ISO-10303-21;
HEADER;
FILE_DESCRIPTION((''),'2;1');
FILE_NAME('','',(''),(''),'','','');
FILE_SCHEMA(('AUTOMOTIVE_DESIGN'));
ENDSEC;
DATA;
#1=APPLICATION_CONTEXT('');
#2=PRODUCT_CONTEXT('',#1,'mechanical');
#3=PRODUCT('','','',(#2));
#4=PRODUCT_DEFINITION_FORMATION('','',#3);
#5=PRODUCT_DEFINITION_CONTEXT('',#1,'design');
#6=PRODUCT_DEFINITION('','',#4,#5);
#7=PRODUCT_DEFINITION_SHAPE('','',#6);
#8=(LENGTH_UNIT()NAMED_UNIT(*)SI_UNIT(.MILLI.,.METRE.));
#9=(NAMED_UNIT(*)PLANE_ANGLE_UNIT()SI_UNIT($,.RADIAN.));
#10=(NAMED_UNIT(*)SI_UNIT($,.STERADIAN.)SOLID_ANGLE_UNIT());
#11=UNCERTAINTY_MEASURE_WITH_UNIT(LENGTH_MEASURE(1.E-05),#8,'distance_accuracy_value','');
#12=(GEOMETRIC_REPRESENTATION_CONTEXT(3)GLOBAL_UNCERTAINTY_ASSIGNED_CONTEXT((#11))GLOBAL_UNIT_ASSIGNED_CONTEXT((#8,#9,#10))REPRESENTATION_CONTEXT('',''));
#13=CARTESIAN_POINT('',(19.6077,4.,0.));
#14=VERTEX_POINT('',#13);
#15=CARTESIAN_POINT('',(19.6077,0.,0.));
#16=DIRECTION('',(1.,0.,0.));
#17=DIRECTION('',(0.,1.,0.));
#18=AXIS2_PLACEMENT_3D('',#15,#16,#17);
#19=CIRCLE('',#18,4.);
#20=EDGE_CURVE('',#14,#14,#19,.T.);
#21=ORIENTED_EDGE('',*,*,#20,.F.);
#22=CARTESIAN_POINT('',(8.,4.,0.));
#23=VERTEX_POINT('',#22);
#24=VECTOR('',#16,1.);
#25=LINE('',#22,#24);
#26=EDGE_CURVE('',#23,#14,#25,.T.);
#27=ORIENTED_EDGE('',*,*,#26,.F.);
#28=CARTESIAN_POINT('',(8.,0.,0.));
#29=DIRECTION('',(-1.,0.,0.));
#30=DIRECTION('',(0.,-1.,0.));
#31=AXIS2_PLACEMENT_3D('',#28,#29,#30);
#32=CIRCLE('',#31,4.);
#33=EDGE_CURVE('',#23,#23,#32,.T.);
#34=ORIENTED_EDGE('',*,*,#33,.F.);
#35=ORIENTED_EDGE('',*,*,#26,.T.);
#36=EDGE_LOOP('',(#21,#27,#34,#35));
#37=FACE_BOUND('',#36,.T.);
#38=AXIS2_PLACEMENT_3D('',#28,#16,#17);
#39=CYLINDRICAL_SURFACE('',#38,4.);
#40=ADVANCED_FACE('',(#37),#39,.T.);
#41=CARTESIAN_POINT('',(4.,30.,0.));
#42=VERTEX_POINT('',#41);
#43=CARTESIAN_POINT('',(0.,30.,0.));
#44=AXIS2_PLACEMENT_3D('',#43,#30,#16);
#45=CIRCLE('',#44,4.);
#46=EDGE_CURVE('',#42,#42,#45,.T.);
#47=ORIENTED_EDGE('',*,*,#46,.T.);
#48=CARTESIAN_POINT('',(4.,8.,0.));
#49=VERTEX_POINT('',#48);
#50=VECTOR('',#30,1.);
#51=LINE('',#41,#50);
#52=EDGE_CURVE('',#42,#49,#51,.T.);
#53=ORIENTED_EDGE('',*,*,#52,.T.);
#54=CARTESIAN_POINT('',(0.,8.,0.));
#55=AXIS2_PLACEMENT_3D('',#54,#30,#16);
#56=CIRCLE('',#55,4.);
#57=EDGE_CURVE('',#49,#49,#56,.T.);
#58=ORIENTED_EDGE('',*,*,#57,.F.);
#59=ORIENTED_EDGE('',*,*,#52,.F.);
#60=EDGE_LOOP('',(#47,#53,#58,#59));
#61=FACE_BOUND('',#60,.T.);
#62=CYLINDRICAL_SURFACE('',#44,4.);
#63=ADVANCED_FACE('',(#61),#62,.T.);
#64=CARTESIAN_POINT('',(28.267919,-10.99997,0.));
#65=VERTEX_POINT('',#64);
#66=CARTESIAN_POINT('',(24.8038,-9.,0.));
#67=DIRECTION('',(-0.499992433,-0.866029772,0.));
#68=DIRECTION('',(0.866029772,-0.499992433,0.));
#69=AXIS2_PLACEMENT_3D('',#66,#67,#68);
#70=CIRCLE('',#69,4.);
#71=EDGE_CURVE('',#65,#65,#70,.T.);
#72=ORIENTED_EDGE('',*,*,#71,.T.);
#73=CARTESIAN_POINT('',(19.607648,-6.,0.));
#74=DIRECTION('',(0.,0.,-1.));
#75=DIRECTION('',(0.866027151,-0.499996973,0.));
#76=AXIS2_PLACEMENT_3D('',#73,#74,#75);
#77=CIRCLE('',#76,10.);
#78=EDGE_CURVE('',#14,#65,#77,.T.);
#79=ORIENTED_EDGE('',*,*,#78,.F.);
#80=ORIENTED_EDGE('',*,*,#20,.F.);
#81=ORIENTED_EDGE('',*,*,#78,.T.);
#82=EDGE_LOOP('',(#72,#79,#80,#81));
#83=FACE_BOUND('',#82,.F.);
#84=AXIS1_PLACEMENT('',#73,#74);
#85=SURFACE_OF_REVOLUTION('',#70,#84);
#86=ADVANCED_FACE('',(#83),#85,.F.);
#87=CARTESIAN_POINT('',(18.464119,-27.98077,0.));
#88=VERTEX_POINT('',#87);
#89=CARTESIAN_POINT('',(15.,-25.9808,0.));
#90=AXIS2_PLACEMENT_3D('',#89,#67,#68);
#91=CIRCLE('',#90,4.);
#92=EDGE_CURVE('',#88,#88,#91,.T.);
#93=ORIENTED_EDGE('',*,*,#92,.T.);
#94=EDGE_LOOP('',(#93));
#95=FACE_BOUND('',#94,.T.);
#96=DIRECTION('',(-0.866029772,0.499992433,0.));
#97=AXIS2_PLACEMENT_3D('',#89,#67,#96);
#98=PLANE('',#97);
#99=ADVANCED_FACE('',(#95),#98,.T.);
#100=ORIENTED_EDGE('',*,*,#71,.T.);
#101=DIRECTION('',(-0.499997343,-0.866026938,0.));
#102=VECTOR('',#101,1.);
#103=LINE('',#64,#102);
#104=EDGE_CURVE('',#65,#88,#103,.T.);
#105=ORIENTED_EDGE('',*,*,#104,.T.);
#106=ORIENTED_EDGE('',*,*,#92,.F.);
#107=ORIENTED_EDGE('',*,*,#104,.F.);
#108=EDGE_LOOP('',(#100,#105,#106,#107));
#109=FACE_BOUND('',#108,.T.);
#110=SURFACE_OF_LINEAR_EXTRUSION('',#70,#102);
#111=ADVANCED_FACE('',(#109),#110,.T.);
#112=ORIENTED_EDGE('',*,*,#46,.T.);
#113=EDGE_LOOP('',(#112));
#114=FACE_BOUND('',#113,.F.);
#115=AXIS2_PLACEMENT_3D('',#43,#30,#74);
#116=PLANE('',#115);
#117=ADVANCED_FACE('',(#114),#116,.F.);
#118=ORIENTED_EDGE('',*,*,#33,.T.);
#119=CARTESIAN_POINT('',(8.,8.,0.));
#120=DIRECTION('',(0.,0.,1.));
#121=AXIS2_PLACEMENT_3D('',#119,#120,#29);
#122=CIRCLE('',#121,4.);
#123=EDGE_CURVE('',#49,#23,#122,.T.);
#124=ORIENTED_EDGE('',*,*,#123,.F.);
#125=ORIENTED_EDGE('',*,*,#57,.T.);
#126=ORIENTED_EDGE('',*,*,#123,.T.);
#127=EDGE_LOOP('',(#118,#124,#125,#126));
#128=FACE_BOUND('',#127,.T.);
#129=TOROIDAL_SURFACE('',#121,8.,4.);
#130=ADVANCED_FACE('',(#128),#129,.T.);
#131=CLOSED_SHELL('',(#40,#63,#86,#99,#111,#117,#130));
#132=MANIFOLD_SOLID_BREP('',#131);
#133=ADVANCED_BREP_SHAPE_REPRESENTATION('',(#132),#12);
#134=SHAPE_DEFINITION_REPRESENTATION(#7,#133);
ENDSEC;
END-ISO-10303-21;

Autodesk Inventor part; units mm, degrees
ref_plane "YZ Plane" through (0, 0, 0) normal (1, 0, 0) x (0, 1, 0)
ref_plane "XZ Plane" through (0, 0, 0) normal (0, 1, 0) x (-1, 0, 0)
sketch "草圖1" plane through (0, 0, 0) normal (0, 0, 1) x (1, 0, 0)
  line L0 (0, 30) -> (0, 8)
  line L1 (8, 0) -> (19.6077, 0)
  line L2 (24.8038, -9) -> (15, -25.9808)
  arc A0 (0, 8) -> (8, 0) centre (8, 8) ccw
  arc A1 (24.8038, -9) -> (19.6077, 0) centre (19.6077, -6) ccw
  point P0 (0, 0)
  point P1 (30, 0)
  dimension "d0" = 60
  dimension "d1" = 30
  dimension "d2" = 30
  dimension "d3" = 15
  dimension "d4" = 8
  dimension "d5" = 6
ref_plane "工作平面1" through (0, 30, 0) normal (0, -1, 0) x (1, 0, 0)
sketch "草圖2" plane through (0, 30, 0) normal (0, -1, 0) x (1, 0, 0)
  circle A0 centre (0, 0) radius 4
  dimension "d6" = 8
sweep "掃掠1" add profiles "草圖2" path "草圖1"
properties part number "示範二"
